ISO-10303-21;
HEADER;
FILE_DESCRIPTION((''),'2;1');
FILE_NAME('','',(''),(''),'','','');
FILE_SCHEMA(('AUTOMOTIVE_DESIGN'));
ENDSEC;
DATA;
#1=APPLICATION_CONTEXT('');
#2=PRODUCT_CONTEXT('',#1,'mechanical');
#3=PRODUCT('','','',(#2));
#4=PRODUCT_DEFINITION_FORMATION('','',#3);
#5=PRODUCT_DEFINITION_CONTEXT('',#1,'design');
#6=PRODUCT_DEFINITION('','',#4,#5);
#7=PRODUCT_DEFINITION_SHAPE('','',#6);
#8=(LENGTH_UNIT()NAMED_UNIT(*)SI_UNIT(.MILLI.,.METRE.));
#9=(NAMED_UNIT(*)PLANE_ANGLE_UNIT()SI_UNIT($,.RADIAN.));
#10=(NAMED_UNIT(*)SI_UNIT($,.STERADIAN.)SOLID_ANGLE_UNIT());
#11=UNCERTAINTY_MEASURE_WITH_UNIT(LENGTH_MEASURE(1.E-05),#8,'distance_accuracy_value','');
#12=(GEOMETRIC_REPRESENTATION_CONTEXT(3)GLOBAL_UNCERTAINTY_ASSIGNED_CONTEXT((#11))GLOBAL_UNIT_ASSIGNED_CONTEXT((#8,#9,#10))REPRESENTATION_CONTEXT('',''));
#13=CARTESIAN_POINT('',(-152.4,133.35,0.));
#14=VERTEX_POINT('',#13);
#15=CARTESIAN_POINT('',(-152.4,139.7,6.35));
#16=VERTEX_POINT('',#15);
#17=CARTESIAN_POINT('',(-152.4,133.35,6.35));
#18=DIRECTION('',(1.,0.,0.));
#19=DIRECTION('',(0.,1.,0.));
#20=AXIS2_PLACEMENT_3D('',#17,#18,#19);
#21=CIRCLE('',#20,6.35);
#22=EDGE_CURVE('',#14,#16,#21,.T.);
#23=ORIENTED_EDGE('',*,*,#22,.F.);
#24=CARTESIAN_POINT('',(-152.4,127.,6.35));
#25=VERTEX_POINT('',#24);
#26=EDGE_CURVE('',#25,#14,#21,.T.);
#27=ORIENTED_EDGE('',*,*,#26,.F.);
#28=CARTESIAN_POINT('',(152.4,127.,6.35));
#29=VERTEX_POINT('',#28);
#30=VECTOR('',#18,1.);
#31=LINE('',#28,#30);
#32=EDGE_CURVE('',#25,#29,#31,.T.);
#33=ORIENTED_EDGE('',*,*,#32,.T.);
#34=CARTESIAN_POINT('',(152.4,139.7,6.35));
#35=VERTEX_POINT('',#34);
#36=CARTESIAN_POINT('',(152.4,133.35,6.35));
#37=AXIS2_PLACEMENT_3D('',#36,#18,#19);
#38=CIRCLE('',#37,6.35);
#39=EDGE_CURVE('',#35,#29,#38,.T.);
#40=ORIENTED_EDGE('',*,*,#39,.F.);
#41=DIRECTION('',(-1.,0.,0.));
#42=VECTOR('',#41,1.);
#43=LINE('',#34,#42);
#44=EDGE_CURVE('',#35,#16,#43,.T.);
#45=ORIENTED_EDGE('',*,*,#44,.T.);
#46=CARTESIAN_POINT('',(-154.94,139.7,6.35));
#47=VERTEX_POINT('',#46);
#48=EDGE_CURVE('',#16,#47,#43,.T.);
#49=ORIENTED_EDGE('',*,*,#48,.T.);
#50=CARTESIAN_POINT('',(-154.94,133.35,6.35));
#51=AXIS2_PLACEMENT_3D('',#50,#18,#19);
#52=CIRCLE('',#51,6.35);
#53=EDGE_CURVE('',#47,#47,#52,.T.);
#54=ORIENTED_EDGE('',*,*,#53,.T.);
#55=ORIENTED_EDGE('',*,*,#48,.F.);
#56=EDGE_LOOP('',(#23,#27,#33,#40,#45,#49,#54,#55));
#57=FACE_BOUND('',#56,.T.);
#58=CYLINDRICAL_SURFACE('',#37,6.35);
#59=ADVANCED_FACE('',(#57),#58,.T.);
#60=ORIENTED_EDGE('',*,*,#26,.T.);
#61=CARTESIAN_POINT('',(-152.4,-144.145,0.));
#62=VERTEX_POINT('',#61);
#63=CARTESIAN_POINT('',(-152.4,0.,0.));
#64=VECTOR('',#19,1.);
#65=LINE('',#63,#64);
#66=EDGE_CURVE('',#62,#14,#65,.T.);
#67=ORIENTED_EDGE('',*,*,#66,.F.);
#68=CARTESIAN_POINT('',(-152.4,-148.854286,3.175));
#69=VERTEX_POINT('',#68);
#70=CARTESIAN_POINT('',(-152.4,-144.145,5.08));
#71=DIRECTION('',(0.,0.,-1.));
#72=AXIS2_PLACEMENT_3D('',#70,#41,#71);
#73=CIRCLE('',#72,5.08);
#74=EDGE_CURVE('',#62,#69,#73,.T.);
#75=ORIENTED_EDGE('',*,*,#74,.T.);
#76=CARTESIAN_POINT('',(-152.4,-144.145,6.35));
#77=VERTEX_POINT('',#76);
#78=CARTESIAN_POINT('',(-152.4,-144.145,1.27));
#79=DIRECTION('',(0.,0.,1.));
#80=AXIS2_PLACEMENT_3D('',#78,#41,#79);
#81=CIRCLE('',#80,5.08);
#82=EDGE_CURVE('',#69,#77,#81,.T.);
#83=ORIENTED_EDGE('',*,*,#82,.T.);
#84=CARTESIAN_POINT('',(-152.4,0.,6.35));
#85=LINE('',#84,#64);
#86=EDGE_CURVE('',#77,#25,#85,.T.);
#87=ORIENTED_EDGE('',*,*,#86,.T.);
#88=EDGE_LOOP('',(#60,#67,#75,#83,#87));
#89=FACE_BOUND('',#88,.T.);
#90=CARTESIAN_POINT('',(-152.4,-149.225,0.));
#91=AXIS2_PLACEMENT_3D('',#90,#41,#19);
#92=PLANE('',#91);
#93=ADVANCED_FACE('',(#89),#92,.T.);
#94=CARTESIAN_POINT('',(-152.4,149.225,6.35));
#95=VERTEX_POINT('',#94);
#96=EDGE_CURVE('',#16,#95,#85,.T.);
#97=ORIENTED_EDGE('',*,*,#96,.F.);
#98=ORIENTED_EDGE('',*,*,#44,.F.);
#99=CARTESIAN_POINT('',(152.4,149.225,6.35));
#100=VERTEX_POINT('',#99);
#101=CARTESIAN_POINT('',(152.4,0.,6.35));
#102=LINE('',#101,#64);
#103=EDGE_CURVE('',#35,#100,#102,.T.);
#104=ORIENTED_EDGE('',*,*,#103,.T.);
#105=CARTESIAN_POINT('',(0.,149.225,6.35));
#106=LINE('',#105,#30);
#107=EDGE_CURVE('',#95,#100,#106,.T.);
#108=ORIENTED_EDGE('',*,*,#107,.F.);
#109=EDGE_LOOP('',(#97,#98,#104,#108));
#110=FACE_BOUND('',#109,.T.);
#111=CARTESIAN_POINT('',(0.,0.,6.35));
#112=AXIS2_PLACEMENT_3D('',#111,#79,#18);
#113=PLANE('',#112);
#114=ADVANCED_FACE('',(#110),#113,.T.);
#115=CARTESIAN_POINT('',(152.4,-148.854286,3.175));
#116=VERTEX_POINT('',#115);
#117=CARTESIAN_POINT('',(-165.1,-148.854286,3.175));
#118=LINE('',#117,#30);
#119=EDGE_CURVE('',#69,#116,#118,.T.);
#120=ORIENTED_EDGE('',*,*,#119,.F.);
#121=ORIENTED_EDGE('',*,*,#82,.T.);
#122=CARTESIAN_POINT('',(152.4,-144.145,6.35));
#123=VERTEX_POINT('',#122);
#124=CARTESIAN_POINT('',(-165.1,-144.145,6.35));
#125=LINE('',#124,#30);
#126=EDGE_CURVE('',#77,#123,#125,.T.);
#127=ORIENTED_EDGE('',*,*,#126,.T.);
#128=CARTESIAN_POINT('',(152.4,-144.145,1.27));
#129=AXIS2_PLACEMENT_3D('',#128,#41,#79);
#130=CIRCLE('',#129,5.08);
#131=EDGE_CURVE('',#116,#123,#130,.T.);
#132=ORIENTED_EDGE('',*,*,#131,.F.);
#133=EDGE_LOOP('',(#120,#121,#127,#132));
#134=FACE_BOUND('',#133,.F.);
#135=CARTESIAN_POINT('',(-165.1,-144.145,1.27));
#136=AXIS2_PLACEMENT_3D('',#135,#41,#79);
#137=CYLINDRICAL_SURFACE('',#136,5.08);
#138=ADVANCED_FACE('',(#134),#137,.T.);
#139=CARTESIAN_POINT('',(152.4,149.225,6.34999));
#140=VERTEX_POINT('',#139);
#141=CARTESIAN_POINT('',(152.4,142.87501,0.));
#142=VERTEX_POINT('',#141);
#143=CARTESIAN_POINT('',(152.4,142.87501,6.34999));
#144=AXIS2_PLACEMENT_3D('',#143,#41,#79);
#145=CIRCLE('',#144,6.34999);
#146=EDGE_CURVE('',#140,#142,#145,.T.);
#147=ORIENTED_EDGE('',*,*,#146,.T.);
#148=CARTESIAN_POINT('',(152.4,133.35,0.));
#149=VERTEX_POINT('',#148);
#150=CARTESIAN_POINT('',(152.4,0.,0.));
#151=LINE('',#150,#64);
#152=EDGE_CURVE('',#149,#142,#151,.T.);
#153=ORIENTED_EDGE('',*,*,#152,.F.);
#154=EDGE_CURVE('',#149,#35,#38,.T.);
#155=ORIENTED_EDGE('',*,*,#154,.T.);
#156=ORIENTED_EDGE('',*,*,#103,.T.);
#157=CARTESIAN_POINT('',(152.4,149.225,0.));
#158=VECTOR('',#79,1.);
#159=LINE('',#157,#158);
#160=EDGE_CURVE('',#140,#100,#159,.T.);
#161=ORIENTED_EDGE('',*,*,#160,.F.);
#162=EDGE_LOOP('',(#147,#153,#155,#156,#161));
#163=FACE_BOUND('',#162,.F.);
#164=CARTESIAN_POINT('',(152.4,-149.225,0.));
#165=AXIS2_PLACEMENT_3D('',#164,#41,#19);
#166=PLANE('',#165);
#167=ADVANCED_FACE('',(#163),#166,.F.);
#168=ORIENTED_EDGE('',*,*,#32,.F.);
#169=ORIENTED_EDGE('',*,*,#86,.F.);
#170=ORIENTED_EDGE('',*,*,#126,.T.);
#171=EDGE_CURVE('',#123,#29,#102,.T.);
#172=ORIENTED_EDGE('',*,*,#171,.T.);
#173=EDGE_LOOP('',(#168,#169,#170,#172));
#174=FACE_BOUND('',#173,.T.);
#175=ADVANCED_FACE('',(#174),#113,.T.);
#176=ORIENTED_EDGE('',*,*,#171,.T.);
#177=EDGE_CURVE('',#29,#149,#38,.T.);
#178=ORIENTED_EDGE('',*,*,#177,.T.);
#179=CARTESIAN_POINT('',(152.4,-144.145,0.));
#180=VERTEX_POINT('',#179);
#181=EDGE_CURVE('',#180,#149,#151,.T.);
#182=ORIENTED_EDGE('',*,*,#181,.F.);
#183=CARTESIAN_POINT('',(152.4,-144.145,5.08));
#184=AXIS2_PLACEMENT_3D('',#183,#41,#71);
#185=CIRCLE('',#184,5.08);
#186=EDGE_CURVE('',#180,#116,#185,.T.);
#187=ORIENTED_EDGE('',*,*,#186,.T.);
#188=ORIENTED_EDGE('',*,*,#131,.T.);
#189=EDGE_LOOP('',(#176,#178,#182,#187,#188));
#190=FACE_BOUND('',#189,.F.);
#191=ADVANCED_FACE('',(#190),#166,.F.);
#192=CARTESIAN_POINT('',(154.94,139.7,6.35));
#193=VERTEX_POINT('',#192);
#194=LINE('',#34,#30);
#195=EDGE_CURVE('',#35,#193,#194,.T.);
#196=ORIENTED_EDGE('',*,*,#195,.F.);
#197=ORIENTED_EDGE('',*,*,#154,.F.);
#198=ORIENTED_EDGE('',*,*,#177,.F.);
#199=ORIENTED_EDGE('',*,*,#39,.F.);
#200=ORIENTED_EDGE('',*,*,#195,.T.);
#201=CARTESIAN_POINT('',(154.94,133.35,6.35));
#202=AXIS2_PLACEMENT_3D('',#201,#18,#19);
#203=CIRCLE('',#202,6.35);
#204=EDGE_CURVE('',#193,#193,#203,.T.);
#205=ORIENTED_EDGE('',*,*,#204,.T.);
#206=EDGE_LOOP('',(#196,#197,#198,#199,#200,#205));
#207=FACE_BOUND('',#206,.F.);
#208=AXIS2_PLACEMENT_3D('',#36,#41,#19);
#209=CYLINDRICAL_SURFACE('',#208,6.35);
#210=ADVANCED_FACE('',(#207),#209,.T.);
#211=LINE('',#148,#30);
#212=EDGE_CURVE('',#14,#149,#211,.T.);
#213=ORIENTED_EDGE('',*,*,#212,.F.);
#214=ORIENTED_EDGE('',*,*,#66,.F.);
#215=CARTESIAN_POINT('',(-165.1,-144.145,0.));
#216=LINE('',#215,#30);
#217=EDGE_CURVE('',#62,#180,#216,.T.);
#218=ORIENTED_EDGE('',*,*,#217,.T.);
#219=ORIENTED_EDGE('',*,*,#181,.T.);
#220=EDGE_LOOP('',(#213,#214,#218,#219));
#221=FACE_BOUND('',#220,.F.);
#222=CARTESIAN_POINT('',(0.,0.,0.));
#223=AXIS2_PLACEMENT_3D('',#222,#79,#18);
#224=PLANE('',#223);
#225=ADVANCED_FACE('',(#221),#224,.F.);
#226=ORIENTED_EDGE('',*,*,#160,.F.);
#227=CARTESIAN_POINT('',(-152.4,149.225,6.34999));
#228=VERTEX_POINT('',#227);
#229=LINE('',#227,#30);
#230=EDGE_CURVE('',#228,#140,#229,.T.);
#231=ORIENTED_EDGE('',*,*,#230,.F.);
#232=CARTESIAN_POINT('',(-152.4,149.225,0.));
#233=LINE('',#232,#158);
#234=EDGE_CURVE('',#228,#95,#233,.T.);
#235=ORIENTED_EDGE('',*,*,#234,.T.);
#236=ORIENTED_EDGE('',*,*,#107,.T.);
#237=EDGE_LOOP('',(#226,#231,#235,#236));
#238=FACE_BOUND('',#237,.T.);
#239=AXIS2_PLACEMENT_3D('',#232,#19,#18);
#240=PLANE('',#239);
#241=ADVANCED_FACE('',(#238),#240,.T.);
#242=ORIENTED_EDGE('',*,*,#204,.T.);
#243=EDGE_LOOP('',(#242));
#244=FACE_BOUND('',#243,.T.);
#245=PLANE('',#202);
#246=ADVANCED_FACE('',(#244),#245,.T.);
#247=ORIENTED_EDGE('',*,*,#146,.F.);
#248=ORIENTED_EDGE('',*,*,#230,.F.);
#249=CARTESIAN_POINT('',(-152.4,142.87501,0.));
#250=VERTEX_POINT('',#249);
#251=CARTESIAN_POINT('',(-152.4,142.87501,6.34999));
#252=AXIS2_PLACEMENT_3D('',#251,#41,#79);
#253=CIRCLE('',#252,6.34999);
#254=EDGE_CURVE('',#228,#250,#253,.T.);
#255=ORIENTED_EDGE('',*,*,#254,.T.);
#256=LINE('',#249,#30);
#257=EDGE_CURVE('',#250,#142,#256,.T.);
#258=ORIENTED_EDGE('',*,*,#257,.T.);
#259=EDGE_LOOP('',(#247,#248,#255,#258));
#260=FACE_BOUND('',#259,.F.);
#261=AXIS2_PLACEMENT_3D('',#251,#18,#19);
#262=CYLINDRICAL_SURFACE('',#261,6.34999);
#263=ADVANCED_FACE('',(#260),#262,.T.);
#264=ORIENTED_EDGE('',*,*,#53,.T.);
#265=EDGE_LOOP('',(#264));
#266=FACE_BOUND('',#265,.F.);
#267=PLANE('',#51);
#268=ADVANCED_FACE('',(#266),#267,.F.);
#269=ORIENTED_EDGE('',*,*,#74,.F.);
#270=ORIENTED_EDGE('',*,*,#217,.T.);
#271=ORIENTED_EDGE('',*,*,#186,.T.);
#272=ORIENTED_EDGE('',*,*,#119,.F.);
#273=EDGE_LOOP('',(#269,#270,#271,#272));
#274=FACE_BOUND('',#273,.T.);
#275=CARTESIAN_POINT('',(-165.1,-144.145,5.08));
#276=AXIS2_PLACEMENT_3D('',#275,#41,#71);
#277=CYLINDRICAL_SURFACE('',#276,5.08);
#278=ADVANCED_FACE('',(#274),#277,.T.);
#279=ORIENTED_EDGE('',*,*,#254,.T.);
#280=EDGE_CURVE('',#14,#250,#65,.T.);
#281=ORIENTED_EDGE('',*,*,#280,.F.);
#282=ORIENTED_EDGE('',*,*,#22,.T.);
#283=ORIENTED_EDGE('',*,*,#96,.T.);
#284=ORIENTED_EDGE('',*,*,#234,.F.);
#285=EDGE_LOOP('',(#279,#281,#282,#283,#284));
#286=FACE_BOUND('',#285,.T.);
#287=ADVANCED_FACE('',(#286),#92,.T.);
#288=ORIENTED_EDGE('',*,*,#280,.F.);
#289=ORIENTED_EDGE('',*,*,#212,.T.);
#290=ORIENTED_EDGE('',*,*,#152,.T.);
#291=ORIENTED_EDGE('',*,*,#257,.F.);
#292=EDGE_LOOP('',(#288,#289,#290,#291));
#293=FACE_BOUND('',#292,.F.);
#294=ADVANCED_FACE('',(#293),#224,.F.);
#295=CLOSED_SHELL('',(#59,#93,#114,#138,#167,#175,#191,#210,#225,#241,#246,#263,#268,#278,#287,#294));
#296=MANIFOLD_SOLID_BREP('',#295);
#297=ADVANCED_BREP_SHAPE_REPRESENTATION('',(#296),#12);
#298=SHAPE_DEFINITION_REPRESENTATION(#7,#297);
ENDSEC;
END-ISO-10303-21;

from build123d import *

# Parameters (mm, degrees)
F0_W          = 304.8
F0_H          = 298.45
F1_DEPTH      = 6.35
F2_R          = 6.34999
F3_R          = 6.35
F4_DEPTH      = 2.54
F4_DEPTH_BACK = 307.34
F5_T1_DEPTH   = 330.2


# Not quite as in the source:
# - a fillet or chamfer that OpenCascade refuses, or shapes differently, is made with other operations: its cross-section is extruded or revolved along the edge and cut away or added
# - a fillet or chamfer is up to 0.001 mm smaller than in the source, because OpenCascade refuses the exact size


with BuildPart() as f1:
    # F0 (on Top) → F1 (new body)
    with BuildSketch(Plane.XY):
        Rectangle(F0_W, F0_H)
    extrude(amount=F1_DEPTH)

    # F2 (radius 6.35 in the source; OpenCascade refuses exactly that, so slightly less here)
    f2_edges = [f1.edges().sort_by_distance(p)[0] for p in [
        (0, 149.225, 0),
    ]]
    fillet(f2_edges, radius=F2_R)

    # F3 (on face) → F4 (join, two sides)
    with BuildSketch(Plane.YZ.offset(152.4)) as f4_sk:
        with Locations((133.35, 6.35)):
            Circle(F3_R)
    extrude(amount=F4_DEPTH)
    extrude(f4_sk.sketch, amount=-F4_DEPTH_BACK)

    # F5: fillet of radius 5.08 on 2 edges, made by hand

    # F5_s2 → F5_t1 (cut)
    with BuildSketch(Plane.YZ.offset(-165.1)):
        with BuildLine():
            ThreePointArc((-144.145, 0), (-147.7371024484, 1.4878975516), (-149.225, 5.08))
            Line((-149.225, 5.08), (-149.225, 0))
            Line((-149.225, 0), (-144.145, 0))
        make_face()
        with BuildLine():
            ThreePointArc((-144.145, 6.35), (-147.7371024484, 4.8621024484), (-149.225, 1.27))
            Line((-149.225, 1.27), (-149.225, 6.35))
            Line((-149.225, 6.35), (-144.145, 6.35))
        make_face()
    extrude(amount=F5_T1_DEPTH, mode=Mode.SUBTRACT)


solid = f1.part
